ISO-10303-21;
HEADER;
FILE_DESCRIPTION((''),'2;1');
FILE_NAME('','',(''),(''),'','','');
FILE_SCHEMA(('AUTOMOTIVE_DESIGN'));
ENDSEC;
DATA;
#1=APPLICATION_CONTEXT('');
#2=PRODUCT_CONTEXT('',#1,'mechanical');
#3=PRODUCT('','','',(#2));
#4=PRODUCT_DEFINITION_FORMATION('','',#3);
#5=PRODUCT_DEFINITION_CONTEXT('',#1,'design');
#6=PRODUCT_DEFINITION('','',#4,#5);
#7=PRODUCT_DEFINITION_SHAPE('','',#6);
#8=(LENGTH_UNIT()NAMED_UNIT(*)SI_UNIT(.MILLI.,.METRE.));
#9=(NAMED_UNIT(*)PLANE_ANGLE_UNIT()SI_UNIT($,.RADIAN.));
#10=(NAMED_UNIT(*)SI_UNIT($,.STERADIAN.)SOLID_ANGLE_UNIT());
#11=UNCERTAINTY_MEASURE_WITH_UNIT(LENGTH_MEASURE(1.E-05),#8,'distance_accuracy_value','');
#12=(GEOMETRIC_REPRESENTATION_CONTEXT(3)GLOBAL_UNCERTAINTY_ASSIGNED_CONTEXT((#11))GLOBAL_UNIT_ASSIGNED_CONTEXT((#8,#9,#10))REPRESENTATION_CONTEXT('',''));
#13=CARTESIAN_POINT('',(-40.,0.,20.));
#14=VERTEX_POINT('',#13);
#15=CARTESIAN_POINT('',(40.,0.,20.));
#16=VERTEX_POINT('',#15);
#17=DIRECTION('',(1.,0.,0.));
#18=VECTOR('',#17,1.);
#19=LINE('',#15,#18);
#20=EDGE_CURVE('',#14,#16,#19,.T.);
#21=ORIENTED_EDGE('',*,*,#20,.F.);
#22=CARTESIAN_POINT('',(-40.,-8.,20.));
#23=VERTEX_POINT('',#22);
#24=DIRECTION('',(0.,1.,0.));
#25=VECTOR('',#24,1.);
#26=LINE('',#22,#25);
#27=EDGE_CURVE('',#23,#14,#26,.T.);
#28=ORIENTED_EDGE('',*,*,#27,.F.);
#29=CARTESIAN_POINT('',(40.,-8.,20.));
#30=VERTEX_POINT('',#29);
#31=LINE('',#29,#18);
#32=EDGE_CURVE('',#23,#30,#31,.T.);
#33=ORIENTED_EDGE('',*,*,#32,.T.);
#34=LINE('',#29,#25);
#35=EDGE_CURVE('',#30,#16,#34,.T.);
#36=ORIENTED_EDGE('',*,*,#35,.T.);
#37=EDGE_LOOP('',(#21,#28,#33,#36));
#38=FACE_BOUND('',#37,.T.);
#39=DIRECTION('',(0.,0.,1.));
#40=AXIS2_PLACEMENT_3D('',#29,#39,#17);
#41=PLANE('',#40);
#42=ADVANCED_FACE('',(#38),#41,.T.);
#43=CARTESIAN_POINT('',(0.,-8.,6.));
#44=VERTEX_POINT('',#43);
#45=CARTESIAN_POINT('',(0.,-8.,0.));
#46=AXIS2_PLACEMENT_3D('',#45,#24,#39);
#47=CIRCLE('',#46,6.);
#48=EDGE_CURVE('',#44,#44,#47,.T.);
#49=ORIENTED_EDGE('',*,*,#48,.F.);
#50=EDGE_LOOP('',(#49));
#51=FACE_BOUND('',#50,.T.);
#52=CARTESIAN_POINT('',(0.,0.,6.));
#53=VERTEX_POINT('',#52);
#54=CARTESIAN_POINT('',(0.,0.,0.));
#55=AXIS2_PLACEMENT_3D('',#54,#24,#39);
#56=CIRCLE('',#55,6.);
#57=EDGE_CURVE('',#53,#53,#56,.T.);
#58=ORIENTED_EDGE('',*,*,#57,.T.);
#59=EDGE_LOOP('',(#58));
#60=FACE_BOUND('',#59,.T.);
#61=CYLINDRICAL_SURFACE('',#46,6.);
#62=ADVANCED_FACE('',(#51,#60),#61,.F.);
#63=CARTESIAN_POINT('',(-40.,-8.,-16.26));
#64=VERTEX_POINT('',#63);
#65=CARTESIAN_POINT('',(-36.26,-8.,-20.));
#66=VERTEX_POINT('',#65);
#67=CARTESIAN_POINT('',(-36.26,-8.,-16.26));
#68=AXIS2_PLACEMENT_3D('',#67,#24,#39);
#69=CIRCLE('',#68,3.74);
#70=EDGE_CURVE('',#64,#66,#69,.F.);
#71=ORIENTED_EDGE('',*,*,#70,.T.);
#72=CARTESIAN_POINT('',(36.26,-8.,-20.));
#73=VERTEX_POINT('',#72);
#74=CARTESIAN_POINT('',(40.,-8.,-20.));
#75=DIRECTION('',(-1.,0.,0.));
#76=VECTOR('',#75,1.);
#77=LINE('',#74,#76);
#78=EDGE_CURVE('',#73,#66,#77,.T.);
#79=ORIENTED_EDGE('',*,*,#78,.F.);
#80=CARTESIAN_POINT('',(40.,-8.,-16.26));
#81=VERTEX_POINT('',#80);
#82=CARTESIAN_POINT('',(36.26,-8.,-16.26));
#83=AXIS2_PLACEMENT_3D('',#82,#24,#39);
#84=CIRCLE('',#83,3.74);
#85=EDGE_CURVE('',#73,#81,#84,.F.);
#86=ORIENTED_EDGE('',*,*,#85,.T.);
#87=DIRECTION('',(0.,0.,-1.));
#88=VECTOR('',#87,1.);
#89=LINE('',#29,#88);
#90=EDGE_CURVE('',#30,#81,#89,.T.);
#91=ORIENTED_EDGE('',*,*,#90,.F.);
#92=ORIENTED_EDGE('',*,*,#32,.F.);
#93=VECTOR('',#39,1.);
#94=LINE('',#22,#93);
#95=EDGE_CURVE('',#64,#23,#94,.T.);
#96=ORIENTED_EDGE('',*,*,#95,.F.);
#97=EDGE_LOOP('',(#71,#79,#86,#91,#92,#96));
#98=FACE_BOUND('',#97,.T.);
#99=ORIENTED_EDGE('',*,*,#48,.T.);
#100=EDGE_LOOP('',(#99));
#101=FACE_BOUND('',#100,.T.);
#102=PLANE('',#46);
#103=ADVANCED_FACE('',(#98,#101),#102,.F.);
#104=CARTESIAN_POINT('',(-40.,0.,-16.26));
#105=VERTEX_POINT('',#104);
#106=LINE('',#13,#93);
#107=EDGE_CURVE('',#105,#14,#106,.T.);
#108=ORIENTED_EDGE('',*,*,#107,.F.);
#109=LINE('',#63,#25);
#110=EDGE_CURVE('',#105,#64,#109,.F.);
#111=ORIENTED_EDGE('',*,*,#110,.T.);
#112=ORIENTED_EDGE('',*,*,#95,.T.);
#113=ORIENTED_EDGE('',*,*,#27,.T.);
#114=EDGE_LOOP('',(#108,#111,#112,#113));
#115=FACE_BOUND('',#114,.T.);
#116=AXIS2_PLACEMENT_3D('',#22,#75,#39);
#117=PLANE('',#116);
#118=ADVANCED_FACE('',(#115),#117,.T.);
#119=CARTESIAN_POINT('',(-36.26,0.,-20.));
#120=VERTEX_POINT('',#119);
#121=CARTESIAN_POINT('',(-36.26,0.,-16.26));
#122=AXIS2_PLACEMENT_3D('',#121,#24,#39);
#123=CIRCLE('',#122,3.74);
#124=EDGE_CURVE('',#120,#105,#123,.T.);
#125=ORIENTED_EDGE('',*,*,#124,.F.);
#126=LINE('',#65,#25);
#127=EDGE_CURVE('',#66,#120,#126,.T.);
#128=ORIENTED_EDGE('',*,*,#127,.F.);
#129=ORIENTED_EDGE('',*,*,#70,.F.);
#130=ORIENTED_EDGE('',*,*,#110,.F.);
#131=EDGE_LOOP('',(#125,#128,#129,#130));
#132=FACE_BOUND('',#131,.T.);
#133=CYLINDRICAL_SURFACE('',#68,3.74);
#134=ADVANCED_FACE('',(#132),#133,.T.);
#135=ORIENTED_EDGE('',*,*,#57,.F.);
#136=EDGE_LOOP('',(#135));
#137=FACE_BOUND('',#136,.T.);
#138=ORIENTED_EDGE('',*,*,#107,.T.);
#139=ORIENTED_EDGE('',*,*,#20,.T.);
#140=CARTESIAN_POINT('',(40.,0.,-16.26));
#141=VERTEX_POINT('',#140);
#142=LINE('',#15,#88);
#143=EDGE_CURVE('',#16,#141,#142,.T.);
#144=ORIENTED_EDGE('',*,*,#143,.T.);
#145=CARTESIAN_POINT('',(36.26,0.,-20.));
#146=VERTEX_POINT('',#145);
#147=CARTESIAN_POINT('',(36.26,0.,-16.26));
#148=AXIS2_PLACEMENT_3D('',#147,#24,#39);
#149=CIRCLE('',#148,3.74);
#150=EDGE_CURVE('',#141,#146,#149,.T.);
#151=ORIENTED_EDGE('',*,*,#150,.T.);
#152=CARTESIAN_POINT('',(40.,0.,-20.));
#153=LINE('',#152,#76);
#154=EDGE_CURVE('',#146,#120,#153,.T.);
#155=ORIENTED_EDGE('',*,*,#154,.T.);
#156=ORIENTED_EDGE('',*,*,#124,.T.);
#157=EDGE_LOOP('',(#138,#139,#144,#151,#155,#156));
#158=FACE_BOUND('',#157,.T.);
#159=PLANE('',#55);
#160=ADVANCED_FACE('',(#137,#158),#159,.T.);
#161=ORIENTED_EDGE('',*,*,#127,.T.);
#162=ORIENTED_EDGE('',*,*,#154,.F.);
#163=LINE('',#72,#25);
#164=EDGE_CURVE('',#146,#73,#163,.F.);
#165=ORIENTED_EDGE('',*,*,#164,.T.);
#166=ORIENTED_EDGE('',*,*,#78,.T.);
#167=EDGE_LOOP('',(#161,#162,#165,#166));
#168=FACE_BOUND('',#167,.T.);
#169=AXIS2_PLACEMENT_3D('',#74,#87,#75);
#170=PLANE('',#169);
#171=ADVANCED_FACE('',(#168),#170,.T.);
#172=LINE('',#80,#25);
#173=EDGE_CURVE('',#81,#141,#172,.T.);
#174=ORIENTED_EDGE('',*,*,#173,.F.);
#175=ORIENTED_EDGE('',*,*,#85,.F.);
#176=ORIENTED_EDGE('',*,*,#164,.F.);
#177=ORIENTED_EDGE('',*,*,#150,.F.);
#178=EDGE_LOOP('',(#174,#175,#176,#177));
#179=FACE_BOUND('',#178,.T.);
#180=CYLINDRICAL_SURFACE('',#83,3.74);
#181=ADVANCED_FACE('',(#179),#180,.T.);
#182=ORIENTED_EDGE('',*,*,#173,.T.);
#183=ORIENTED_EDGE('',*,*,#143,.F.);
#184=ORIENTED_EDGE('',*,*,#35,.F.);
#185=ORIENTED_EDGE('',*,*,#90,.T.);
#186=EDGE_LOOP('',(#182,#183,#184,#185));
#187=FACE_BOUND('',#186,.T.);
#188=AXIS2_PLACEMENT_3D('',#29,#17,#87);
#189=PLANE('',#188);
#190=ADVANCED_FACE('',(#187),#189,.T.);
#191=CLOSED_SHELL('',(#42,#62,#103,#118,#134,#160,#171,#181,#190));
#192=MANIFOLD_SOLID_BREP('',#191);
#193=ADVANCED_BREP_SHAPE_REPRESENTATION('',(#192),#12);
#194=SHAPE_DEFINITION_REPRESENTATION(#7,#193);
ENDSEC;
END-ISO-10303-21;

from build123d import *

# Parameters (mm, degrees)
SKETCH1_W          = 80
SKETCH1_H          = 40
BASE_FLANGE1_DEPTH = 8
SKETCH6_R          = 6
CUT_EXTRUDE1_DEPTH = 10
FILLET1_R          = 3.74


# Sheet-metal steps are written as plain solids
with BuildPart() as part:
    # Sketch1 → Base-Flange1 (new body)
    with BuildSketch(Plane(origin=(0, 0, 0), x_dir=(1, 0, 0), z_dir=(0, 1, 0))):
        Rectangle(SKETCH1_W, SKETCH1_H)
    extrude(amount=-BASE_FLANGE1_DEPTH)

    # Sketch6 → Cut-Extrude1 (cut)
    with BuildSketch(Plane(origin=(0, 0, 0), x_dir=(1, 0, 0), z_dir=(0, 1, 0))):
        with Locations(Location((0, 0, 0), (0, 0, 270))):
            Circle(SKETCH6_R)
    extrude(amount=-CUT_EXTRUDE1_DEPTH, mode=Mode.SUBTRACT)

    # Fillet1
    fillet1_edges = [part.edges().sort_by_distance(p)[0] for p in [
        (-40, -4, -20),
        (40, -4, -20),
    ]]
    fillet(fillet1_edges, radius=FILLET1_R)


solid = part.part
